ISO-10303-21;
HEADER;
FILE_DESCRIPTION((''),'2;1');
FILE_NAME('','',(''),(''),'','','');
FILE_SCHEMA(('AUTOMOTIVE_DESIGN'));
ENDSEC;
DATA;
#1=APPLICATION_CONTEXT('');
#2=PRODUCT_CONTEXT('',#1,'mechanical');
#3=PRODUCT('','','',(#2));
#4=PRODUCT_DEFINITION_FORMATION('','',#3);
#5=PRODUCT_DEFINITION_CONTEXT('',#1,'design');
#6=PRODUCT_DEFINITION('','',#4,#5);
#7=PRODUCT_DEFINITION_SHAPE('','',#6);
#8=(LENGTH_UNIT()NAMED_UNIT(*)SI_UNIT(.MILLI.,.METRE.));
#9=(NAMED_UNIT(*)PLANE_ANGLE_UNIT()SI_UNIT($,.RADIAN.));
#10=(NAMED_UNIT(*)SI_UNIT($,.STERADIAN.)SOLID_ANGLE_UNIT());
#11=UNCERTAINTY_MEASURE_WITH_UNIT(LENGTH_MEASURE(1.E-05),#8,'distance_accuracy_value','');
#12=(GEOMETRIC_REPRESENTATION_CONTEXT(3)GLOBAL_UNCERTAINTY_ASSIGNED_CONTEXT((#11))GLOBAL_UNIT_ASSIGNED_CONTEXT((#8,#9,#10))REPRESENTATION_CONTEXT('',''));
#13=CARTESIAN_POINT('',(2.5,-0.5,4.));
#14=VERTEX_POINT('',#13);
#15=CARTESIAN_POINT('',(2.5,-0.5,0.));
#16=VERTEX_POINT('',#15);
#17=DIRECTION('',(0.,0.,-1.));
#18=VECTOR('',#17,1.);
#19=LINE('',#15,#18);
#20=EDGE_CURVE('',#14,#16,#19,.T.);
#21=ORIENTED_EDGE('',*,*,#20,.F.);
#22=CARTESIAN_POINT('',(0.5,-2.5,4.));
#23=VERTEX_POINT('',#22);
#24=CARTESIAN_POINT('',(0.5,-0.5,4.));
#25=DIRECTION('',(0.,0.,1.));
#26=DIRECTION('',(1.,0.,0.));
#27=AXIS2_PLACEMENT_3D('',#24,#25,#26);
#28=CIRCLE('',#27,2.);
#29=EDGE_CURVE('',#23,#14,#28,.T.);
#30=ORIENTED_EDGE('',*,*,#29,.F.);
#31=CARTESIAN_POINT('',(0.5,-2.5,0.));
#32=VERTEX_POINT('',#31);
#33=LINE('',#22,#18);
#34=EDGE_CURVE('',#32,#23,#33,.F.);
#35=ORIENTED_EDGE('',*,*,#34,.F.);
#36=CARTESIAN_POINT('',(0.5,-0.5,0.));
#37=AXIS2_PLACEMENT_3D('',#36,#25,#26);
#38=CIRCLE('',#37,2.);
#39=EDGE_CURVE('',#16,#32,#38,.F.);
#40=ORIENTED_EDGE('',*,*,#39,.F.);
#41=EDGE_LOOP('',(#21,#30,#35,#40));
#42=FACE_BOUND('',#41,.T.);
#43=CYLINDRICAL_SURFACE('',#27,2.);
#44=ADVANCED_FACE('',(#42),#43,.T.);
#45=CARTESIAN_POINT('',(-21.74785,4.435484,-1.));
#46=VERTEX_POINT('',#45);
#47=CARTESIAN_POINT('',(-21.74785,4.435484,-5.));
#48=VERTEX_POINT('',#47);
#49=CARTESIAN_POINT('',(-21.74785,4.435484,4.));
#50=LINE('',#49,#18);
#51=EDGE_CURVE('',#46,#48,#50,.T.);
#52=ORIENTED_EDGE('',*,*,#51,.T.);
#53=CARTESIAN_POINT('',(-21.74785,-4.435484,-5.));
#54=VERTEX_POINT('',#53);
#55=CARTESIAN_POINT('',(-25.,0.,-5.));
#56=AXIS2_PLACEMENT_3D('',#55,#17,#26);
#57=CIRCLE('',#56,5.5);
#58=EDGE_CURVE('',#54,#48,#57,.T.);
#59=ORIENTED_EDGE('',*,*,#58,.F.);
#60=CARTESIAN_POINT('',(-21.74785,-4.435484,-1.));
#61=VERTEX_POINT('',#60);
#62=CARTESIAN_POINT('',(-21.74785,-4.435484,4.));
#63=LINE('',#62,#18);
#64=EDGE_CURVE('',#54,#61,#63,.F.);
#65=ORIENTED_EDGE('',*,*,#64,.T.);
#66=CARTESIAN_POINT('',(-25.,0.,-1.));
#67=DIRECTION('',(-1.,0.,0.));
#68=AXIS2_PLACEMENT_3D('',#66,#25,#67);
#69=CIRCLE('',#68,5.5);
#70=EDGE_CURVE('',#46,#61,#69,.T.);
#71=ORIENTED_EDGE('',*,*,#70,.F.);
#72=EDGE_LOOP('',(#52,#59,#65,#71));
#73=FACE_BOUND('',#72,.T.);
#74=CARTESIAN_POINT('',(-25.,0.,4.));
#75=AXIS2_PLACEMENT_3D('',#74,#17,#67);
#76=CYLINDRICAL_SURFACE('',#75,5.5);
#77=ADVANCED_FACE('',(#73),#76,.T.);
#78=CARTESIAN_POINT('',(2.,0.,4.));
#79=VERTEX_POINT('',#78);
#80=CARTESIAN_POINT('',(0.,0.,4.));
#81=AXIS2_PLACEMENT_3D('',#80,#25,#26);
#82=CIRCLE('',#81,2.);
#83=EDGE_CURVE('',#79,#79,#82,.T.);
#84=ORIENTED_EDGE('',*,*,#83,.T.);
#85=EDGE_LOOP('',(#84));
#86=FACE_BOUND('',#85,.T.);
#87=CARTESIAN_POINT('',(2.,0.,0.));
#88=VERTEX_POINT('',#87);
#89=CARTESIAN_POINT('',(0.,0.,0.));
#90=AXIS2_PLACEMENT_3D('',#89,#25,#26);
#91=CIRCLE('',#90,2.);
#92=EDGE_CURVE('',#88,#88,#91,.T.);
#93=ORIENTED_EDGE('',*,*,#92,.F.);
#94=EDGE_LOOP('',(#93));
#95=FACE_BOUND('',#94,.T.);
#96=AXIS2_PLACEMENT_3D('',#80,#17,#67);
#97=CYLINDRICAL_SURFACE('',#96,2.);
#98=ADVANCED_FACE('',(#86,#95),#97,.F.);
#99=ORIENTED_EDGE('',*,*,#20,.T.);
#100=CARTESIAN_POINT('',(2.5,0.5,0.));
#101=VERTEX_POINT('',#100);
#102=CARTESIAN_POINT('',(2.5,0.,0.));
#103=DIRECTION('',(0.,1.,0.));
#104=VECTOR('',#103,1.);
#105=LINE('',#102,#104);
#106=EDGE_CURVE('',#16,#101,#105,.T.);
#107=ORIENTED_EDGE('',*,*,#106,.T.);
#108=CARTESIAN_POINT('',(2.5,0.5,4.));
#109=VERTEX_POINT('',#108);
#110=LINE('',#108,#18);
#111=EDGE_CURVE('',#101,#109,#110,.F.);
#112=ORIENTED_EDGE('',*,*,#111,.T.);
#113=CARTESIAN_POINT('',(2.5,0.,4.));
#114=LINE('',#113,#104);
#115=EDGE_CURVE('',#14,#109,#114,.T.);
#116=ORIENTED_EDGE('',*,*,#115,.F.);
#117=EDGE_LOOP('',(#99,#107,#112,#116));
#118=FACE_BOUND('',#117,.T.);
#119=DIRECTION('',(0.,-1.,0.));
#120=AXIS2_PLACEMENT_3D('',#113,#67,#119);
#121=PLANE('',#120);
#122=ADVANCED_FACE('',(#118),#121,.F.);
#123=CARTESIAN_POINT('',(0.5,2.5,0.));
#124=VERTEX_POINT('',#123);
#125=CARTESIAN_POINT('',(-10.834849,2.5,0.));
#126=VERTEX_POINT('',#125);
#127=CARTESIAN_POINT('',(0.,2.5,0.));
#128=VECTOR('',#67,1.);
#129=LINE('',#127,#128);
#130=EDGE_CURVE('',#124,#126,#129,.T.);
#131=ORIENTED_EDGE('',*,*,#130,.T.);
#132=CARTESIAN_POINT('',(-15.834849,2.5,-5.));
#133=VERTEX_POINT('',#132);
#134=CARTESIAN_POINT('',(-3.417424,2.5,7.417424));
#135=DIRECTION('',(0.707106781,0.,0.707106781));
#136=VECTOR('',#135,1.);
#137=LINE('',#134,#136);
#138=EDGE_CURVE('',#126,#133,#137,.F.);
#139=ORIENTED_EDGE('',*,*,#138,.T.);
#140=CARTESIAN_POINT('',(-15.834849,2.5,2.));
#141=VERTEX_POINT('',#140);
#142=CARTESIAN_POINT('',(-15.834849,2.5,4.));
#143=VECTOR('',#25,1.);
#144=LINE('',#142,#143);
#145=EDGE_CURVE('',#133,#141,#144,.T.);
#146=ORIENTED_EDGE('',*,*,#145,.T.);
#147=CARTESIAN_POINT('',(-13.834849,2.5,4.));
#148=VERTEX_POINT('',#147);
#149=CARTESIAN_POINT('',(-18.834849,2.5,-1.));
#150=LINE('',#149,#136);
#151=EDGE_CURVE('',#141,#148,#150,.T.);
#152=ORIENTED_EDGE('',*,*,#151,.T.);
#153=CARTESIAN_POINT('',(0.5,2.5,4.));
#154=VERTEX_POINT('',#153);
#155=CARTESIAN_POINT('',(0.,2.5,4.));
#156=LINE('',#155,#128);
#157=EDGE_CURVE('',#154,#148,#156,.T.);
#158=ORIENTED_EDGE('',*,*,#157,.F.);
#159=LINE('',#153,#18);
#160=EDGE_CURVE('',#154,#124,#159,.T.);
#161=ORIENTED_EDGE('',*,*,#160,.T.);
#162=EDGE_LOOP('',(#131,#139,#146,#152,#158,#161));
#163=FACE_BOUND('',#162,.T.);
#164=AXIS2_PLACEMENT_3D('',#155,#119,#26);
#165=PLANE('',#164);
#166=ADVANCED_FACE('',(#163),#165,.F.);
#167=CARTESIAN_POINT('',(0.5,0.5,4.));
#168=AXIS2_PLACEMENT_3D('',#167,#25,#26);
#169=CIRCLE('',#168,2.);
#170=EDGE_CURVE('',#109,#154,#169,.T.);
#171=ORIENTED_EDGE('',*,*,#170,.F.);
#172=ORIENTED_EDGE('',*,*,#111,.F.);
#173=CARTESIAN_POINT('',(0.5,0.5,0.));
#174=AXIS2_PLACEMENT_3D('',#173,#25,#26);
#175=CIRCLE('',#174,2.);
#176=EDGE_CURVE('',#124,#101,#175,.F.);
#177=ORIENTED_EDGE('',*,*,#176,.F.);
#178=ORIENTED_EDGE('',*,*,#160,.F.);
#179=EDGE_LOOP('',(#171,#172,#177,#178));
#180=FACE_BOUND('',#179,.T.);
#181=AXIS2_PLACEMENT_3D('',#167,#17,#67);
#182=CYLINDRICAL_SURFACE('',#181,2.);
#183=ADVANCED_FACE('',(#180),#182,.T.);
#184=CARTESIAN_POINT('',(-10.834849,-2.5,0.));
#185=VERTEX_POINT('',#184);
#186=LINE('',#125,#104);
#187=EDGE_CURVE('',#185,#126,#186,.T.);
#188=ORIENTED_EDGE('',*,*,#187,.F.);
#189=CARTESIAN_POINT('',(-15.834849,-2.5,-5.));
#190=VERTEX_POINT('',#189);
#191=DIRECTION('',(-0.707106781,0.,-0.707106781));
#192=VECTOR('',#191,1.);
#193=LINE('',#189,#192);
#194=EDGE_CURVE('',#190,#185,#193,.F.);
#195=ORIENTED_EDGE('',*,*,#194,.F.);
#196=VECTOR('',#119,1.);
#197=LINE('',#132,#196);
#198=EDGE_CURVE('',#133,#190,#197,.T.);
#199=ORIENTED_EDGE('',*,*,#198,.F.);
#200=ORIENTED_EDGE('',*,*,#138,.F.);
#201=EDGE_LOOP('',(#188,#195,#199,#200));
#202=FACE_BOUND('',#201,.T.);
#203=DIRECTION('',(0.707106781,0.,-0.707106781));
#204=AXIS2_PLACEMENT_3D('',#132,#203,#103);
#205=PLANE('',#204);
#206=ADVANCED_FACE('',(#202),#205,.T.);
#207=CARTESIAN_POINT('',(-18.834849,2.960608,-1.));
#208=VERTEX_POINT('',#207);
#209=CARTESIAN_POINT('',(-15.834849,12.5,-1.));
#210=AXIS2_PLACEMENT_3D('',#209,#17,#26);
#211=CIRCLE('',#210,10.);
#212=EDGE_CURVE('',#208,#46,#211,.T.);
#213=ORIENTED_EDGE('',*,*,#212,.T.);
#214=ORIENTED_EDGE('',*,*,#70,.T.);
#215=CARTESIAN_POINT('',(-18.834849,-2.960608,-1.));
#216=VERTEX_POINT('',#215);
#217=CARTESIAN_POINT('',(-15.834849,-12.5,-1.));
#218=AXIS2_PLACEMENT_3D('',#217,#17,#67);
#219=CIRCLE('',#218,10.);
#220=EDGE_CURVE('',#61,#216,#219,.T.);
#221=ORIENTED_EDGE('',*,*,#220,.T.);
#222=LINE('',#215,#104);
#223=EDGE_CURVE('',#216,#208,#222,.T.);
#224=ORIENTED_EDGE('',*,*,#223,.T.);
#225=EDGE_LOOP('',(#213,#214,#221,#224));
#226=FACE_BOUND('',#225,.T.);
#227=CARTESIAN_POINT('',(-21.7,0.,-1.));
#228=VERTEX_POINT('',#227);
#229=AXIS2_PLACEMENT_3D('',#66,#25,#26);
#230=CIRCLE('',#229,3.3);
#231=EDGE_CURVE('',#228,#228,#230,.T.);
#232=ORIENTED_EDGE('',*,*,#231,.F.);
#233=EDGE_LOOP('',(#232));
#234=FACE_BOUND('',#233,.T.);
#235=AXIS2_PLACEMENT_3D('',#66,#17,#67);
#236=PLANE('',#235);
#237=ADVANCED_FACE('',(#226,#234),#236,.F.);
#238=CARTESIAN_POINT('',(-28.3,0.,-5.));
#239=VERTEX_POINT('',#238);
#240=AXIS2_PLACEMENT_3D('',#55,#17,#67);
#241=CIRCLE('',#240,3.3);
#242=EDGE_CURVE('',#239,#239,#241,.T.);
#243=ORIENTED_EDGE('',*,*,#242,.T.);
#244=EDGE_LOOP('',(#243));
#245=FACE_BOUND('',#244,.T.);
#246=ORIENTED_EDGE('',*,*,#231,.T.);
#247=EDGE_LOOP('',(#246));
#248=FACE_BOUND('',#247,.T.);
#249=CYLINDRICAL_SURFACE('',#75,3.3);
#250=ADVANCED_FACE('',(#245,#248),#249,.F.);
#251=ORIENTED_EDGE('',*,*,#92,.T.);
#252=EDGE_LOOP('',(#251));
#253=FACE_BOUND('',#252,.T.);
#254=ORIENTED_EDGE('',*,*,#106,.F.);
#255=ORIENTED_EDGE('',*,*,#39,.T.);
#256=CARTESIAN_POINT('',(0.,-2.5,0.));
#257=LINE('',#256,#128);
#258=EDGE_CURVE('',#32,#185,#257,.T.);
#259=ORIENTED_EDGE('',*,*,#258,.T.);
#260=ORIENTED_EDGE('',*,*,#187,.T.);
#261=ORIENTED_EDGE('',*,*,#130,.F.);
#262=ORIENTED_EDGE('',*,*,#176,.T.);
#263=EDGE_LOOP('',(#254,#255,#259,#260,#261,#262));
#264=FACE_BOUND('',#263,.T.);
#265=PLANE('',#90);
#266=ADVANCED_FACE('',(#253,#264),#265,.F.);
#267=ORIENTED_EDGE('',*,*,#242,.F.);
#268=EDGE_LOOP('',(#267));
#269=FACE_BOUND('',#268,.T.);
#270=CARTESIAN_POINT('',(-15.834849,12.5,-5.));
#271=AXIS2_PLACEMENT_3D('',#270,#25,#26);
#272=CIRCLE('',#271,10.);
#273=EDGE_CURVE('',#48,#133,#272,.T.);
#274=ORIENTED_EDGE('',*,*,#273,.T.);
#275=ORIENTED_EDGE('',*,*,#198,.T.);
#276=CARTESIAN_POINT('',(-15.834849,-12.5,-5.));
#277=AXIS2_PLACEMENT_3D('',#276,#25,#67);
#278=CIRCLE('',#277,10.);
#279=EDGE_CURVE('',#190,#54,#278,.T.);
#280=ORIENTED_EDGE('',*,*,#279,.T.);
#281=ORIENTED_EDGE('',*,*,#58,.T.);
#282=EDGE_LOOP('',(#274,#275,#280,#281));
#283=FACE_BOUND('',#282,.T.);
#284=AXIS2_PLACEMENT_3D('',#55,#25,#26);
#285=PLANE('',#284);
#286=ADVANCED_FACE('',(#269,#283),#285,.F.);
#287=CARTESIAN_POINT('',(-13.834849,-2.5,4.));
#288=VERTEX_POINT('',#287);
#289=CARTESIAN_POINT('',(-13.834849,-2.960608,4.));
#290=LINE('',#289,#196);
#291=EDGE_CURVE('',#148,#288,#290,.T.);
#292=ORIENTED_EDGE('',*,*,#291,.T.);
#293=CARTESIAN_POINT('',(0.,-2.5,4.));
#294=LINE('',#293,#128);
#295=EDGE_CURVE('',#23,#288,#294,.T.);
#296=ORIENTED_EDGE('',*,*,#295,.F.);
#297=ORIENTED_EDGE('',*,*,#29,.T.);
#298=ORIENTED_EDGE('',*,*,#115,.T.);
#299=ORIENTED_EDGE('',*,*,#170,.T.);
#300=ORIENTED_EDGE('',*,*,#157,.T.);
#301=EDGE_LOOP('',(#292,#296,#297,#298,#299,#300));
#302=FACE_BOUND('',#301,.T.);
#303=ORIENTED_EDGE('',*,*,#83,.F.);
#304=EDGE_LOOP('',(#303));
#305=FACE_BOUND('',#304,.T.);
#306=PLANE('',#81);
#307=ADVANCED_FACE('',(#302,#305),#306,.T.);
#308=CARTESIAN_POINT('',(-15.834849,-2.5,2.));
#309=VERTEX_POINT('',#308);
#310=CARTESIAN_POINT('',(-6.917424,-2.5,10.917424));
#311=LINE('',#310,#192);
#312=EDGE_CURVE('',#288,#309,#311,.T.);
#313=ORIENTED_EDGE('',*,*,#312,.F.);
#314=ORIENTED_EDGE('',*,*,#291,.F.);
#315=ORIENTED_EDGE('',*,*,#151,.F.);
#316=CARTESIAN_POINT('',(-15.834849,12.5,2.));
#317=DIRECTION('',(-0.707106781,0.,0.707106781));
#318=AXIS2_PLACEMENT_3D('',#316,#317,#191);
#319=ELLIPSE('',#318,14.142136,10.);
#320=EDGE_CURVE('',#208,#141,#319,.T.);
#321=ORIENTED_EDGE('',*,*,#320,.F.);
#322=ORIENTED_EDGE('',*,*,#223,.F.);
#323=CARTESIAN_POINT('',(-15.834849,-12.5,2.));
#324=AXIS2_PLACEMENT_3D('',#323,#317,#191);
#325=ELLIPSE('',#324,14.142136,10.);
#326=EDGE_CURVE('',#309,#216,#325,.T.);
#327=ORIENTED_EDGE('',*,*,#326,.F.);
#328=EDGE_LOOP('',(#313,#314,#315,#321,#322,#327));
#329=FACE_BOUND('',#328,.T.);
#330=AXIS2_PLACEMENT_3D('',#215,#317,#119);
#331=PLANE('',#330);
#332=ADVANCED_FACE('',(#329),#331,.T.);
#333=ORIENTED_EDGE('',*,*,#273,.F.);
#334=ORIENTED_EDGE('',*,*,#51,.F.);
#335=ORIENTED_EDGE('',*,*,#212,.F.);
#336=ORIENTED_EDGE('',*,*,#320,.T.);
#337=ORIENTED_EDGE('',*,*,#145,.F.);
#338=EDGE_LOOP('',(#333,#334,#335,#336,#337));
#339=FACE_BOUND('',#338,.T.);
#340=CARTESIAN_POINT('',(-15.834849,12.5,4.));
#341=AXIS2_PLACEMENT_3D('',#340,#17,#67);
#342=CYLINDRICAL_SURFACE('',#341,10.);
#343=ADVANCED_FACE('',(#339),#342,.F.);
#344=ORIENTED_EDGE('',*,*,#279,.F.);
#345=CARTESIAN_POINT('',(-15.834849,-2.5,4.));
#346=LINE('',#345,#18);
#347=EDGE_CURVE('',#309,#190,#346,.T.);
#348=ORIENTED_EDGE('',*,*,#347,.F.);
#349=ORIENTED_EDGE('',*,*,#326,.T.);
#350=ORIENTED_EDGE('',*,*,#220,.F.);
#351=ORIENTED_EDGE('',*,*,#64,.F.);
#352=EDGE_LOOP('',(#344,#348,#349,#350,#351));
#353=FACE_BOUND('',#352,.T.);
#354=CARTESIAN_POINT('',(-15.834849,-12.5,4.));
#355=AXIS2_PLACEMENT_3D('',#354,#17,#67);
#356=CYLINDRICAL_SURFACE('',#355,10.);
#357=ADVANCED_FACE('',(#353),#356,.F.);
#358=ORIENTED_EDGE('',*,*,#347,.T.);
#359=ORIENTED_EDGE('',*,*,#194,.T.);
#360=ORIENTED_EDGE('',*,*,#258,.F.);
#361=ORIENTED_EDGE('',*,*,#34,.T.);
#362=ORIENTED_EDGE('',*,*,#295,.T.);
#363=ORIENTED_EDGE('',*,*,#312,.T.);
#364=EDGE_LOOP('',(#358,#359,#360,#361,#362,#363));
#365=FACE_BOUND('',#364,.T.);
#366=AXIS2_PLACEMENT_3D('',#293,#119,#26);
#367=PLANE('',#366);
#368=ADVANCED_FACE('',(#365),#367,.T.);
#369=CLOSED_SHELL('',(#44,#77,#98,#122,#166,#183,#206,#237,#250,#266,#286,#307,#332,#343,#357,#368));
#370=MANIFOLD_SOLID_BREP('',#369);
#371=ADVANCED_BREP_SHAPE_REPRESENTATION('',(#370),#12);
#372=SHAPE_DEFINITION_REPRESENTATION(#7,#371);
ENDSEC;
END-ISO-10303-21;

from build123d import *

# Parameters (mm, degrees)
SKETCH_1_R          = 2
EXTRUDE_1_DEPTH     = 4
FILLET_1_R          = 10
FILLET_2_R          = 2
SKETCH_8_R          = 3.300000000000001
EXTRUDE_3_DEPTH     = 5
CHAMFER_1_SIZE      = 5
SKETCH_9_R          = 3.300000000000001
CUT_EXTRUDE_3_DEPTH = 5
CHAMFER_2_SIZE      = 5


with BuildPart() as part:
    # ｽｹｯﾁ1 → ﾎﾞｽ - 押し出し1 (new body)
    # profile 1 of 5: a face of its own
    with BuildSketch(Plane.XY):
        with BuildLine():
            ThreePointArc((-27.5, 2.1540659228538024), (-27.33345237791561, 2.333452377915602), (-27.15406592285381, 2.49999999999999))
            Line((-27.154065922853814, 2.499999999999997), (-27.499999999999996, 2.499999999999997))
            Line((-27.499999999999996, 2.499999999999997), (-27.499999999999996, 2.154065922853802))
        make_face()
    # profile 2 of 5: a face of its own
    with BuildSketch(Plane.XY):
        with BuildLine():
            Line((-27.5, -2.500000000000003), (-27.154065922853817, -2.500000000000003))
            ThreePointArc((-27.154065922853817, -2.499999999999992), (-27.333452377915613, -2.3334523779156044), (-27.5, -2.1540659228538055))
            Line((-27.5, -2.1540659228538055), (-27.5, -2.500000000000003))
        make_face()
    # profile 3 of 5: a face of its own
    with BuildSketch(Plane.XY):
        with BuildLine():
            ThreePointArc((-20.10102051443362, 2.49999999999994), (-30.499999999999996, -2.39e-15), (-20.101020514433618, -2.4999999999999454))
            Line((-20.1010205144336, -2.500000000000002), (-22.84593407714621, -2.5000000000000027))
            ThreePointArc((-22.845934077146207, -2.5000000000000133), (-25.000000000000018, -3.3000000000000043), (-27.154065922853817, -2.499999999999992))
            Line((-27.154065922853817, -2.500000000000003), (-27.5, -2.500000000000003))
            Line((-27.5, -2.500000000000003), (-27.5, -2.1540659228538055))
            ThreePointArc((-27.5, -2.1540659228538055), (-28.3, -1.19e-15), (-27.5, 2.1540659228538024))
            Line((-27.499999999999996, 2.154065922853802), (-27.499999999999996, 2.499999999999997))
            Line((-27.499999999999996, 2.499999999999997), (-27.154065922853814, 2.499999999999997))
            ThreePointArc((-27.15406592285381, 2.49999999999999), (-25.000000000000014, 3.299999999999998), (-22.845934077146207, 2.500000000000007))
            Line((-22.84593407714621, 2.4999999999999982), (-20.1010205144336, 2.4999999999999987))
        make_face()
    # profile 4 of 5: a face of its own
    with BuildSketch(Plane.XY):
        with BuildLine():
            Line((-22.84593407714621, -2.5000000000000027), (-20.1010205144336, -2.500000000000002))
            ThreePointArc((-20.101020514433618, -2.4999999999999454), (-19.652365608485606, -1.2856151891963796), (-19.500000000000004, -4.41e-15))
            ThreePointArc((-19.500000000000004, -3.06e-15), (-19.652365608485606, 1.2856151891963756), (-20.10102051443362, 2.49999999999994))
            Line((-20.1010205144336, 2.4999999999999987), (-22.84593407714621, 2.4999999999999982))
            ThreePointArc((-22.845934077146207, 2.5000000000000067), (-22.00013187411367, 1.3750604449591433), (-21.7, -3.06e-15))
            ThreePointArc((-21.7, -3.87e-15), (-22.00013187411367, -1.3750604449591517), (-22.845934077146207, -2.5000000000000133))
        make_face()
    # profile 5 of 5: a face of its own
    with BuildSketch(Plane.XY):
        with BuildLine():
            Line((-20.1010205144336, -2.500000000000002), (2.5, -2.4999999999999996))
            Line((2.5, -2.4999999999999996), (2.499999999999999, 2.500000000000005))
            Line((2.499999999999999, 2.500000000000005), (-20.1010205144336, 2.4999999999999987))
            ThreePointArc((-20.10102051443362, 2.49999999999994), (-19.652365608485606, 1.2856151891963756), (-19.500000000000004, -3.06e-15))
            ThreePointArc((-19.500000000000004, -4.41e-15), (-19.652365608485606, -1.2856151891963796), (-20.101020514433618, -2.4999999999999454))
        make_face()
        Circle(SKETCH_1_R, mode=Mode.SUBTRACT)
    extrude(amount=EXTRUDE_1_DEPTH)

    # ﾌｨﾚｯﾄ1
    fillet_1_edges = [part.edges().sort_by_distance(p)[0] for p in [
        (-20.10102051443361, 2.4999999999999694, 2),
        (-20.10102051443361, -2.4999999999999742, 2),
    ]]
    fillet(fillet_1_edges, radius=FILLET_1_R)

    # ﾌｨﾚｯﾄ2
    fillet_2_edges = [part.edges().sort_by_distance(p)[0] for p in [
        (2.499999999999999, 2.500000000000005, 2),
        (2.5, -2.4999999999999996, 2),
    ]]
    fillet(fillet_2_edges, radius=FILLET_2_R)

    # ｽｹｯﾁ8 → ﾎﾞｽ - 押し出し3 (add)
    with BuildSketch(Plane(origin=(0, 0, 0), x_dir=(-1, 0, 0), z_dir=(0, 0, -1))):
        with BuildLine():
            Line((15.83484861008833, 2.5), (15.834848610088294, -2.500000000000004))
            ThreePointArc((15.834848610088294, -2.500000000000004), (18.945703694279587, -2.996180733770167), (21.747849506805537, -4.435483870967743))
            ThreePointArc((21.747849506805537, -4.435483870967743), (30.499999999999996, -3.06e-15), (21.747849506805537, 4.435483870967737))
            ThreePointArc((21.747849506805537, 4.435483870967737), (18.9457036942796, 2.996180733770169), (15.83484861008833, 2.5))
        make_face()
        with Locations((25, -3.06e-15)):
            Circle(SKETCH_8_R, mode=Mode.SUBTRACT)
    extrude(amount=EXTRUDE_3_DEPTH)

    # 面取り1
    chamfer_1_edges = [part.edges().sort_by_distance(p)[0] for p in [
        (-15.834848610088311, -1.78e-15, 0),
    ]]
    chamfer(chamfer_1_edges, length=CHAMFER_1_SIZE - 0.0001)  # a hair under: the kernel refuses the full size

    # ｽｹｯﾁ9 → ｶｯﾄ - 押し出し3 (cut)
    with BuildSketch(Plane.XY.offset(4)):
        with BuildLine():
            Line((-18.834848610088333, -2.960607985830548), (-18.83484861008833, 2.9606079858305425))
            ThreePointArc((-18.83484861008833, 2.9606079858305425), (-20.351950663989726, 3.5783527846792875), (-21.747849506805537, 4.435483870967737))
            ThreePointArc((-21.747849506805537, 4.435483870967737), (-30.499999999999996, -1.29e-15), (-21.747849506805537, -4.435483870967743))
            ThreePointArc((-21.747849506805537, -4.435483870967743), (-20.35195066398973, -3.5783527846792946), (-18.834848610088333, -2.960607985830548))
        make_face()
        with Locations(Location((-25, -3.06e-15, 0), (0, 0, 180))):
            Circle(SKETCH_9_R, mode=Mode.SUBTRACT)
    extrude(amount=-CUT_EXTRUDE_3_DEPTH, mode=Mode.SUBTRACT)

    # 面取り2
    chamfer_2_edges = [part.edges().sort_by_distance(p)[0] for p in [
        (-18.83484861008833, -2.66e-15, 4),
    ]]
    chamfer(chamfer_2_edges, length=CHAMFER_2_SIZE - 0.0001)  # a hair under: the kernel refuses the full size


solid = part.part
